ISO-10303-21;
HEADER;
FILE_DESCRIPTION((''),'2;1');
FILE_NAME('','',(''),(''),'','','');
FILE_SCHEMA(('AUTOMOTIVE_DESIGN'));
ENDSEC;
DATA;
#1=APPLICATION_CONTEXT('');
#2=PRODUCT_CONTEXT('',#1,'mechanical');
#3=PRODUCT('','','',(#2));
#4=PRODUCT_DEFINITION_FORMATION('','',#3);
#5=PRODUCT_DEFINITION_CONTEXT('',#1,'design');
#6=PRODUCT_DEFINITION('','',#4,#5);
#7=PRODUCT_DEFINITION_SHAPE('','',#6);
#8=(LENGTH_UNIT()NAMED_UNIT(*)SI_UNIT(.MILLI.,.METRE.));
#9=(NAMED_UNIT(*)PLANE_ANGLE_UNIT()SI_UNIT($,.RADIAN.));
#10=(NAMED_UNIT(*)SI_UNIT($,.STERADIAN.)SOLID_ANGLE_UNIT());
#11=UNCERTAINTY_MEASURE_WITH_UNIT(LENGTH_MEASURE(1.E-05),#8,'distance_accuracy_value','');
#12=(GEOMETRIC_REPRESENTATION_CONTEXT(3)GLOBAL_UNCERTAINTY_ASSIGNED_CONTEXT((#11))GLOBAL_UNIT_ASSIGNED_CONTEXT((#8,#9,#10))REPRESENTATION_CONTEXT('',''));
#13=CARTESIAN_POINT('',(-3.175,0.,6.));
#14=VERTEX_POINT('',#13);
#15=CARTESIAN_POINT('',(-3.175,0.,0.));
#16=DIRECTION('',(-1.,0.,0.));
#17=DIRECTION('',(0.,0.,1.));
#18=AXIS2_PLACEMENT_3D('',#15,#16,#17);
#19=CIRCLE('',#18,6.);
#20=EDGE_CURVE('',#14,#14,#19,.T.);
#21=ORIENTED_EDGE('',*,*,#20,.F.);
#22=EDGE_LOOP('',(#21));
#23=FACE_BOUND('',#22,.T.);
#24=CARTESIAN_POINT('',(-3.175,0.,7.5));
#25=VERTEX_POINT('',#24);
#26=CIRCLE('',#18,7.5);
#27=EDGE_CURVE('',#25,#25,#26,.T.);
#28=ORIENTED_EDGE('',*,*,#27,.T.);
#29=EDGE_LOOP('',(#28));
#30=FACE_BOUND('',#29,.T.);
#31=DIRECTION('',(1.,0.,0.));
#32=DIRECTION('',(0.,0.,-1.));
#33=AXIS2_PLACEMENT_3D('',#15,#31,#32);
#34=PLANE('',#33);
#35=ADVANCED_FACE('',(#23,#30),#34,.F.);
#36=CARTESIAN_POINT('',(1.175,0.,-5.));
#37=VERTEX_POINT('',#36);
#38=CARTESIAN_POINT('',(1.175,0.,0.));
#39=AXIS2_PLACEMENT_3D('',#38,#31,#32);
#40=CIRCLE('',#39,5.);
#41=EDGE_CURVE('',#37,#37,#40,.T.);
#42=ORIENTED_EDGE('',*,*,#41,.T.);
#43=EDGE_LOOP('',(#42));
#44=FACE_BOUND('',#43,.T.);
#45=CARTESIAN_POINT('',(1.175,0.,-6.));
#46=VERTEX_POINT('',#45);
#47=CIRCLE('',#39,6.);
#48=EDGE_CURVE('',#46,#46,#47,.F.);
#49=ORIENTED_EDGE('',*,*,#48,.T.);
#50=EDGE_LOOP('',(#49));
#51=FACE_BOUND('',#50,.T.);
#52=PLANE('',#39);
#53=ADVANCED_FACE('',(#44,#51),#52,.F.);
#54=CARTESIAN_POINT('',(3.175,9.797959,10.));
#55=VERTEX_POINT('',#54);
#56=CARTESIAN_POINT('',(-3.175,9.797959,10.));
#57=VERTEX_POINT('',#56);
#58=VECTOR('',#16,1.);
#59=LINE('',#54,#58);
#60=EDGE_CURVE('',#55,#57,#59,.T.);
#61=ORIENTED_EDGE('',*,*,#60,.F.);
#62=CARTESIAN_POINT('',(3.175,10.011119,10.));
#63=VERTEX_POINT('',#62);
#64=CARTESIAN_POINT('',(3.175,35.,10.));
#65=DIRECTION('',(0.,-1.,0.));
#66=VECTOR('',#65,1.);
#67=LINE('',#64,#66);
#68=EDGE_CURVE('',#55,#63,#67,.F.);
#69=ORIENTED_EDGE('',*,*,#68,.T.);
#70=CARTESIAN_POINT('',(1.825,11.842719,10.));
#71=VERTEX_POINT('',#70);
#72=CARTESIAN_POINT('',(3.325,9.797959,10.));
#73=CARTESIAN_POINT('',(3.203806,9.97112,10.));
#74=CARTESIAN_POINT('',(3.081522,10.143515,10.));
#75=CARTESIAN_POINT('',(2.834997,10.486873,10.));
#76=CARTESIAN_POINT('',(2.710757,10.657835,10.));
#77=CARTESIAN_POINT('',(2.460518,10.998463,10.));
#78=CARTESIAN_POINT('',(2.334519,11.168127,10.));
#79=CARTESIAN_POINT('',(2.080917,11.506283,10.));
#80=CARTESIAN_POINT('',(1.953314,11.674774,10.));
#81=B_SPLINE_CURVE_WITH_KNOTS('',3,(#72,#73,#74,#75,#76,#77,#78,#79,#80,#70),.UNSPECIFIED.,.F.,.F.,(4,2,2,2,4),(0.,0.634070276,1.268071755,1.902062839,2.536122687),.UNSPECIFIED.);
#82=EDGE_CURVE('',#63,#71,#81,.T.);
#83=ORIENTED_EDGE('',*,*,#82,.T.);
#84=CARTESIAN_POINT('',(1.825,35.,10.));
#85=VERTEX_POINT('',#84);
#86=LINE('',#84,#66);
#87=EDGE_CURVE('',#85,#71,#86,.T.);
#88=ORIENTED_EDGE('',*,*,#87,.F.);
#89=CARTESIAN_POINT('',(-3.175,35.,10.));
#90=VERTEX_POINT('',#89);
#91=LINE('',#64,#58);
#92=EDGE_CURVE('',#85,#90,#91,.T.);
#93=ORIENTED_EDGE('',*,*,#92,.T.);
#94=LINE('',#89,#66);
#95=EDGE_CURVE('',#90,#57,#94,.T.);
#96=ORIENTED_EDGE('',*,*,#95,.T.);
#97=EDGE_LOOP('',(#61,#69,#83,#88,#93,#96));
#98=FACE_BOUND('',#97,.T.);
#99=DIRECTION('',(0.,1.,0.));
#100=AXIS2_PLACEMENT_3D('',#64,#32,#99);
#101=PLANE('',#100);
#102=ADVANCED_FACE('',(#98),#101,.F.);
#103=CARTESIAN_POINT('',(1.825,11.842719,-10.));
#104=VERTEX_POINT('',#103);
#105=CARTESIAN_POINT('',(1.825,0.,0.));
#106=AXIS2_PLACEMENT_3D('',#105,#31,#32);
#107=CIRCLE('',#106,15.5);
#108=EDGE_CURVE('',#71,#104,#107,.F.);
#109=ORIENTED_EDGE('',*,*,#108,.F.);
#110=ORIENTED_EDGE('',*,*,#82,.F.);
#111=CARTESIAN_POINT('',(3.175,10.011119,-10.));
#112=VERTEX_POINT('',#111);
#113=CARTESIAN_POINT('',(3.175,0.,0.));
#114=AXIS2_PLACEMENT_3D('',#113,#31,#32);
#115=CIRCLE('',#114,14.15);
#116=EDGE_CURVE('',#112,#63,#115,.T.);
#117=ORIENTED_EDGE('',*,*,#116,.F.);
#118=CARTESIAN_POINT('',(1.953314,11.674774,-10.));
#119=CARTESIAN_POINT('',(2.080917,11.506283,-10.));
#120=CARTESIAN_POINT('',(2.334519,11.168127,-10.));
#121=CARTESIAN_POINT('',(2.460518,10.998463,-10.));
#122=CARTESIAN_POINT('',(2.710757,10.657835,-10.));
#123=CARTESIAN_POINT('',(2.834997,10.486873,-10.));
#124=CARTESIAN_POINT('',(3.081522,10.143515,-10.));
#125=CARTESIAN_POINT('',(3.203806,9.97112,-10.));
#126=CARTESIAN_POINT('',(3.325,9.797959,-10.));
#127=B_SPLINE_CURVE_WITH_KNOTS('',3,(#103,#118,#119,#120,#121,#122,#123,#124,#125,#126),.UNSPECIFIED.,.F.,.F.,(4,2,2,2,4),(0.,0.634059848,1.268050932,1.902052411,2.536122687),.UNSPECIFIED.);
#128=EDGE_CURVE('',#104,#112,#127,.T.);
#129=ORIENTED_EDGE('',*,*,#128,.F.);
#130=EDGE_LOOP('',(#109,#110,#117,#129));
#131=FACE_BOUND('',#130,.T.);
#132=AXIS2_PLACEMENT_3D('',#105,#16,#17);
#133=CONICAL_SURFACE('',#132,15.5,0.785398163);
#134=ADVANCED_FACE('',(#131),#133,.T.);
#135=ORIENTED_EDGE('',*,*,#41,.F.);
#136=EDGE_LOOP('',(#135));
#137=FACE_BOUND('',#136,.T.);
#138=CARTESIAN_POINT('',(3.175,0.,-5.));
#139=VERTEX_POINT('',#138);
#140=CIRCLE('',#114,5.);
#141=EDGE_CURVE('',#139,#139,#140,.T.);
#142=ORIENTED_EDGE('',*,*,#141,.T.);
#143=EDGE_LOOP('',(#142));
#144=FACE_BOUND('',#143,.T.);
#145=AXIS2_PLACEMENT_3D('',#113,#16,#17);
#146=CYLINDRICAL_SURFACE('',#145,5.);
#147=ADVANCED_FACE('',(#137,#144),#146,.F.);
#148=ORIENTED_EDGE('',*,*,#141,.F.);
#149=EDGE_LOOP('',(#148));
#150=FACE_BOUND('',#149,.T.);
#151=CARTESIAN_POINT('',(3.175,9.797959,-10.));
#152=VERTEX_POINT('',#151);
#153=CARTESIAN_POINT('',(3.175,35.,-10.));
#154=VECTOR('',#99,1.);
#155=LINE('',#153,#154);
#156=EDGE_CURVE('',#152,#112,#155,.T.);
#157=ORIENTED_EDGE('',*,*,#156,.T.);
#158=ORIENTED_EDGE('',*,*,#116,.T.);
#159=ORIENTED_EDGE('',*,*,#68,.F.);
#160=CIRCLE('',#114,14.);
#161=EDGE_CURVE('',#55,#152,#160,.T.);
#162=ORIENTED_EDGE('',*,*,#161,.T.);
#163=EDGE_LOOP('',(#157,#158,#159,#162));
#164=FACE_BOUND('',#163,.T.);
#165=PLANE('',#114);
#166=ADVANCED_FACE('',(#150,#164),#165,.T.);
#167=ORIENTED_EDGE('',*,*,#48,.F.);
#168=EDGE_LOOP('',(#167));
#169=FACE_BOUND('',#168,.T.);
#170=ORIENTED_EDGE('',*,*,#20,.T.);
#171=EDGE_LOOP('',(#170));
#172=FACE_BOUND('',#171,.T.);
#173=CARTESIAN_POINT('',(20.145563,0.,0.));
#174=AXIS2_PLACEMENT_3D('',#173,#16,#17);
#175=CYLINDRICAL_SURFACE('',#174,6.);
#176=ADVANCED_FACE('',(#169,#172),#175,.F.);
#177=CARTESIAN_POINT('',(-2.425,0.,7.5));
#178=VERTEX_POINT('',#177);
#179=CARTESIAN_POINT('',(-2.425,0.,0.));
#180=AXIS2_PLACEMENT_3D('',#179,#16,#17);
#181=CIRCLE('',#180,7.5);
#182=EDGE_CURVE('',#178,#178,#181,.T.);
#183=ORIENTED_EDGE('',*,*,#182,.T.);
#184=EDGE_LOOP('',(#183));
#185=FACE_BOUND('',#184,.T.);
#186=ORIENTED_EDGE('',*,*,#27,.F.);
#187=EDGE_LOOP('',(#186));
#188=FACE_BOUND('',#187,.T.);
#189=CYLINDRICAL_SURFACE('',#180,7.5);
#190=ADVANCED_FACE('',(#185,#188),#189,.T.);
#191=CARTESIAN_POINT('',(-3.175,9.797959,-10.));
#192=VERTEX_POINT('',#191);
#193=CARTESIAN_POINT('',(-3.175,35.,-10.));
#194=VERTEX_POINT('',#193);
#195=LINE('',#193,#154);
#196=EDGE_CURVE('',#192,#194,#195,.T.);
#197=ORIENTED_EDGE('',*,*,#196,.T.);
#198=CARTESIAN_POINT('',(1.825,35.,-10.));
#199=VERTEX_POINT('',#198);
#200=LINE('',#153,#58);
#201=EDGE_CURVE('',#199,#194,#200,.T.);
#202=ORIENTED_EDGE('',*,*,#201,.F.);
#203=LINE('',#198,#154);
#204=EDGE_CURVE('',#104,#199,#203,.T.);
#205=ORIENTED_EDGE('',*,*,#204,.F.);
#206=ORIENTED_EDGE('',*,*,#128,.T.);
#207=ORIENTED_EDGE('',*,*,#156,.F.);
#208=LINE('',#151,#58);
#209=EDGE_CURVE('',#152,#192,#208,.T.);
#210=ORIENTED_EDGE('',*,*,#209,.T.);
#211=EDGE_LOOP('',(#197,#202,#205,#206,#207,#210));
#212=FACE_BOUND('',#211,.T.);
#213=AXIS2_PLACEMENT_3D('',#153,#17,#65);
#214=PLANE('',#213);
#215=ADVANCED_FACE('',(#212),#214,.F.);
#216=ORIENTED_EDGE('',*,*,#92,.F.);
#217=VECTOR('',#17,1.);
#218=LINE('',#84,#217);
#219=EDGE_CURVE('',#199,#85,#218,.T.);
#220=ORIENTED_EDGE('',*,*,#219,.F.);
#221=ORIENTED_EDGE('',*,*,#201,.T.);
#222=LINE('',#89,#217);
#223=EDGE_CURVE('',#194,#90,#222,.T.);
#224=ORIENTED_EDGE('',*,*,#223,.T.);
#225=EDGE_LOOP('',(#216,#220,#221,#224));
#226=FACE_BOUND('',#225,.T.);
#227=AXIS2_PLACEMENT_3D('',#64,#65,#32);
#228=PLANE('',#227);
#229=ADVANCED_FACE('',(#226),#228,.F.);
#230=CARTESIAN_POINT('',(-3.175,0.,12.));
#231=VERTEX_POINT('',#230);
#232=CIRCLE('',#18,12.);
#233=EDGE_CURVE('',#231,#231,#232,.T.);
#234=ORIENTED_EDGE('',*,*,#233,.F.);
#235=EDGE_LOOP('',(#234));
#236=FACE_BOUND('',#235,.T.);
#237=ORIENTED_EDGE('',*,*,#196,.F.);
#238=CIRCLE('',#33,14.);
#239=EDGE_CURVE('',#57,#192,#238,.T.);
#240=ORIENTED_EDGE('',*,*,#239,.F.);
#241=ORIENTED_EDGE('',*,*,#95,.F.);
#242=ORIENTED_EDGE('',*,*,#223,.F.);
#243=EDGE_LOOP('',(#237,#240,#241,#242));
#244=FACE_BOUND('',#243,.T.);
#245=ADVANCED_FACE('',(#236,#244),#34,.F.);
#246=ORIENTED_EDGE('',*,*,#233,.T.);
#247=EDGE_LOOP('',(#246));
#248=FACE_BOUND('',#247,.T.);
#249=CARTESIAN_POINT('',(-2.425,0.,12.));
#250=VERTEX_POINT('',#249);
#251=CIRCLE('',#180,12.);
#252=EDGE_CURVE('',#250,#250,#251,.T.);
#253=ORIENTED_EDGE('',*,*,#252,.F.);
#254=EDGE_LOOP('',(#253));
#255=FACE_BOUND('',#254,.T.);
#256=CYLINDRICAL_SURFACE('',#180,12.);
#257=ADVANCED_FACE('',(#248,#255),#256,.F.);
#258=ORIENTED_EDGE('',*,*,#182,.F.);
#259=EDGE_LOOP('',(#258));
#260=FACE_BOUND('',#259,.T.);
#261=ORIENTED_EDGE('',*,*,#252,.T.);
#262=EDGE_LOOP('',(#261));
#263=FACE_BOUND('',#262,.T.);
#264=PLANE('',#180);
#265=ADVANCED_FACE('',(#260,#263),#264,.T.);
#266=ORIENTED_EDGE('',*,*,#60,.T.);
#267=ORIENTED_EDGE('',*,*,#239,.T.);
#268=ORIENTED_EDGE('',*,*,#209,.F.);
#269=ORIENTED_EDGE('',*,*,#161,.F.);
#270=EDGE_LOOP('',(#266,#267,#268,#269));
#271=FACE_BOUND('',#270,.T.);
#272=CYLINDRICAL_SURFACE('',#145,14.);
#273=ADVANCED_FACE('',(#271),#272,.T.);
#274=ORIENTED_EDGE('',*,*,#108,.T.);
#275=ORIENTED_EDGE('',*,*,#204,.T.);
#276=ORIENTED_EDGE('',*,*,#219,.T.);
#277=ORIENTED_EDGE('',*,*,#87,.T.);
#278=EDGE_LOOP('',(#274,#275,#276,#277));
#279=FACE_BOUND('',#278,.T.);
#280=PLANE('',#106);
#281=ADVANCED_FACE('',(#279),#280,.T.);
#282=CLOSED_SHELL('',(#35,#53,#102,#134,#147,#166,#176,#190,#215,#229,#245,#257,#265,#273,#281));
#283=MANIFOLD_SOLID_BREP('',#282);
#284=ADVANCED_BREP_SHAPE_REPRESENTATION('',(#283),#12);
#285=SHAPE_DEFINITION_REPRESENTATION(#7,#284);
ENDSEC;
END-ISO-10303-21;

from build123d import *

# Parameters (mm, degrees)
SKETCH1_R           = 5
BOSS_EXTRUDE1_DEPTH = 3.175
SKETCH2_R           = 6
CUT_EXTRUDE1_DEPTH  = 4.35
CUT_EXTRUDE2_DEPTH  = 1.35
CHAMFER2_SIZE       = 1.5
SKETCH8_R           = 12
SKETCH8_R_2         = 7.5
CUT_EXTRUDE3_DEPTH  = 0.75


with BuildPart() as part:
    # Sketch1 → Boss-Extrude1 (new, symmetric)
    with BuildSketch(Plane(origin=(0, 0, 0), x_dir=(0, 0, -1), z_dir=(1, 0, 0))):
        with BuildLine():
            Line((-10, 35), (10, 35))
            Line((10, 35), (10, 9.797958971))
            ThreePointArc((10, 9.797958971), (0, -14), (-10, 9.797958971))
            Line((-10, 9.797958971), (-10, 35))
        make_face()
        Circle(SKETCH1_R, mode=Mode.SUBTRACT)
    extrude(amount=BOSS_EXTRUDE1_DEPTH, both=True)

    # Sketch2 → Cut-Extrude1 (cut)
    with BuildSketch(Plane.ZY.offset(3.175)):
        Circle(SKETCH2_R)
    extrude(amount=-CUT_EXTRUDE1_DEPTH, mode=Mode.SUBTRACT)

    # Sketch4 → Cut-Extrude2 (cut)
    with BuildSketch(Plane.ZY.offset(-3.175)):
        with BuildLine():
            Line((-16.06497938, 41.777700925), (20.751052424, 41.777700925))
            Line((20.751052424, 41.777700925), (18.684504783, 1.284491351))
            Line((18.684504783, 1.284491351), (13.967034386, 0.960182519))
            ThreePointArc((13.967034386, 0.960182519), (0, 14), (-13.967034386, 0.960182519))
            Line((-13.967034386, 0.960182519), (-15.162675902, -1.531420388))
            Line((-15.162675902, -1.531420388), (-19.899722353, 37.471795214))
            Line((-19.899722353, 37.471795214), (-16.06497938, 41.777700925))
        make_face()
    extrude(amount=CUT_EXTRUDE2_DEPTH, mode=Mode.SUBTRACT)

    # Chamfer2
    # the kernel refuses this chamfer: 1.5 mm, written as the material it adds along each edge
    with BuildSketch(Plane(origin=(1.825, 0, 0), x_dir=(0, 0.4790238441764441, 0.8778018892155689), z_dir=(0, -0.8778018892155689, 0.4790238441764441))) as chamfer2_piece_1_section:
        Polygon((14 + CHAMFER2_SIZE, 0), (14, -CHAMFER2_SIZE), (14, 0), align=None)
    chamfer2_piece_1 = revolve(axis=Axis((1.825, 0, 0), (-1, 0, 0)), revolution_arc=122.756665739, mode=Mode.PRIVATE)
    chamfer2_piece_1 = split(chamfer2_piece_1, bisect_by=Plane(origin=(2.457619264, 14.825045671, 10), z_dir=(0, 0, -1)), keep=Keep.TOP, mode=Mode.PRIVATE)
    chamfer2_piece_1 = split(chamfer2_piece_1, bisect_by=Plane(origin=(3.175, 14.825045671, 0), z_dir=(-1, 0, 0)), keep=Keep.TOP, mode=Mode.PRIVATE)
    chamfer2_piece_1 = split(chamfer2_piece_1, bisect_by=Plane(origin=(2.457619264, 14.825045671, -10), z_dir=(0, 0, 1)), keep=Keep.TOP, mode=Mode.PRIVATE)
    add(chamfer2_piece_1)

    # Sketch8 → Cut-Extrude3 (cut)
    with BuildSketch(Plane.ZY.offset(3.175)):
        Circle(SKETCH8_R)
        Circle(SKETCH8_R_2, mode=Mode.SUBTRACT)
    extrude(amount=-CUT_EXTRUDE3_DEPTH, mode=Mode.SUBTRACT)


solid = part.part
